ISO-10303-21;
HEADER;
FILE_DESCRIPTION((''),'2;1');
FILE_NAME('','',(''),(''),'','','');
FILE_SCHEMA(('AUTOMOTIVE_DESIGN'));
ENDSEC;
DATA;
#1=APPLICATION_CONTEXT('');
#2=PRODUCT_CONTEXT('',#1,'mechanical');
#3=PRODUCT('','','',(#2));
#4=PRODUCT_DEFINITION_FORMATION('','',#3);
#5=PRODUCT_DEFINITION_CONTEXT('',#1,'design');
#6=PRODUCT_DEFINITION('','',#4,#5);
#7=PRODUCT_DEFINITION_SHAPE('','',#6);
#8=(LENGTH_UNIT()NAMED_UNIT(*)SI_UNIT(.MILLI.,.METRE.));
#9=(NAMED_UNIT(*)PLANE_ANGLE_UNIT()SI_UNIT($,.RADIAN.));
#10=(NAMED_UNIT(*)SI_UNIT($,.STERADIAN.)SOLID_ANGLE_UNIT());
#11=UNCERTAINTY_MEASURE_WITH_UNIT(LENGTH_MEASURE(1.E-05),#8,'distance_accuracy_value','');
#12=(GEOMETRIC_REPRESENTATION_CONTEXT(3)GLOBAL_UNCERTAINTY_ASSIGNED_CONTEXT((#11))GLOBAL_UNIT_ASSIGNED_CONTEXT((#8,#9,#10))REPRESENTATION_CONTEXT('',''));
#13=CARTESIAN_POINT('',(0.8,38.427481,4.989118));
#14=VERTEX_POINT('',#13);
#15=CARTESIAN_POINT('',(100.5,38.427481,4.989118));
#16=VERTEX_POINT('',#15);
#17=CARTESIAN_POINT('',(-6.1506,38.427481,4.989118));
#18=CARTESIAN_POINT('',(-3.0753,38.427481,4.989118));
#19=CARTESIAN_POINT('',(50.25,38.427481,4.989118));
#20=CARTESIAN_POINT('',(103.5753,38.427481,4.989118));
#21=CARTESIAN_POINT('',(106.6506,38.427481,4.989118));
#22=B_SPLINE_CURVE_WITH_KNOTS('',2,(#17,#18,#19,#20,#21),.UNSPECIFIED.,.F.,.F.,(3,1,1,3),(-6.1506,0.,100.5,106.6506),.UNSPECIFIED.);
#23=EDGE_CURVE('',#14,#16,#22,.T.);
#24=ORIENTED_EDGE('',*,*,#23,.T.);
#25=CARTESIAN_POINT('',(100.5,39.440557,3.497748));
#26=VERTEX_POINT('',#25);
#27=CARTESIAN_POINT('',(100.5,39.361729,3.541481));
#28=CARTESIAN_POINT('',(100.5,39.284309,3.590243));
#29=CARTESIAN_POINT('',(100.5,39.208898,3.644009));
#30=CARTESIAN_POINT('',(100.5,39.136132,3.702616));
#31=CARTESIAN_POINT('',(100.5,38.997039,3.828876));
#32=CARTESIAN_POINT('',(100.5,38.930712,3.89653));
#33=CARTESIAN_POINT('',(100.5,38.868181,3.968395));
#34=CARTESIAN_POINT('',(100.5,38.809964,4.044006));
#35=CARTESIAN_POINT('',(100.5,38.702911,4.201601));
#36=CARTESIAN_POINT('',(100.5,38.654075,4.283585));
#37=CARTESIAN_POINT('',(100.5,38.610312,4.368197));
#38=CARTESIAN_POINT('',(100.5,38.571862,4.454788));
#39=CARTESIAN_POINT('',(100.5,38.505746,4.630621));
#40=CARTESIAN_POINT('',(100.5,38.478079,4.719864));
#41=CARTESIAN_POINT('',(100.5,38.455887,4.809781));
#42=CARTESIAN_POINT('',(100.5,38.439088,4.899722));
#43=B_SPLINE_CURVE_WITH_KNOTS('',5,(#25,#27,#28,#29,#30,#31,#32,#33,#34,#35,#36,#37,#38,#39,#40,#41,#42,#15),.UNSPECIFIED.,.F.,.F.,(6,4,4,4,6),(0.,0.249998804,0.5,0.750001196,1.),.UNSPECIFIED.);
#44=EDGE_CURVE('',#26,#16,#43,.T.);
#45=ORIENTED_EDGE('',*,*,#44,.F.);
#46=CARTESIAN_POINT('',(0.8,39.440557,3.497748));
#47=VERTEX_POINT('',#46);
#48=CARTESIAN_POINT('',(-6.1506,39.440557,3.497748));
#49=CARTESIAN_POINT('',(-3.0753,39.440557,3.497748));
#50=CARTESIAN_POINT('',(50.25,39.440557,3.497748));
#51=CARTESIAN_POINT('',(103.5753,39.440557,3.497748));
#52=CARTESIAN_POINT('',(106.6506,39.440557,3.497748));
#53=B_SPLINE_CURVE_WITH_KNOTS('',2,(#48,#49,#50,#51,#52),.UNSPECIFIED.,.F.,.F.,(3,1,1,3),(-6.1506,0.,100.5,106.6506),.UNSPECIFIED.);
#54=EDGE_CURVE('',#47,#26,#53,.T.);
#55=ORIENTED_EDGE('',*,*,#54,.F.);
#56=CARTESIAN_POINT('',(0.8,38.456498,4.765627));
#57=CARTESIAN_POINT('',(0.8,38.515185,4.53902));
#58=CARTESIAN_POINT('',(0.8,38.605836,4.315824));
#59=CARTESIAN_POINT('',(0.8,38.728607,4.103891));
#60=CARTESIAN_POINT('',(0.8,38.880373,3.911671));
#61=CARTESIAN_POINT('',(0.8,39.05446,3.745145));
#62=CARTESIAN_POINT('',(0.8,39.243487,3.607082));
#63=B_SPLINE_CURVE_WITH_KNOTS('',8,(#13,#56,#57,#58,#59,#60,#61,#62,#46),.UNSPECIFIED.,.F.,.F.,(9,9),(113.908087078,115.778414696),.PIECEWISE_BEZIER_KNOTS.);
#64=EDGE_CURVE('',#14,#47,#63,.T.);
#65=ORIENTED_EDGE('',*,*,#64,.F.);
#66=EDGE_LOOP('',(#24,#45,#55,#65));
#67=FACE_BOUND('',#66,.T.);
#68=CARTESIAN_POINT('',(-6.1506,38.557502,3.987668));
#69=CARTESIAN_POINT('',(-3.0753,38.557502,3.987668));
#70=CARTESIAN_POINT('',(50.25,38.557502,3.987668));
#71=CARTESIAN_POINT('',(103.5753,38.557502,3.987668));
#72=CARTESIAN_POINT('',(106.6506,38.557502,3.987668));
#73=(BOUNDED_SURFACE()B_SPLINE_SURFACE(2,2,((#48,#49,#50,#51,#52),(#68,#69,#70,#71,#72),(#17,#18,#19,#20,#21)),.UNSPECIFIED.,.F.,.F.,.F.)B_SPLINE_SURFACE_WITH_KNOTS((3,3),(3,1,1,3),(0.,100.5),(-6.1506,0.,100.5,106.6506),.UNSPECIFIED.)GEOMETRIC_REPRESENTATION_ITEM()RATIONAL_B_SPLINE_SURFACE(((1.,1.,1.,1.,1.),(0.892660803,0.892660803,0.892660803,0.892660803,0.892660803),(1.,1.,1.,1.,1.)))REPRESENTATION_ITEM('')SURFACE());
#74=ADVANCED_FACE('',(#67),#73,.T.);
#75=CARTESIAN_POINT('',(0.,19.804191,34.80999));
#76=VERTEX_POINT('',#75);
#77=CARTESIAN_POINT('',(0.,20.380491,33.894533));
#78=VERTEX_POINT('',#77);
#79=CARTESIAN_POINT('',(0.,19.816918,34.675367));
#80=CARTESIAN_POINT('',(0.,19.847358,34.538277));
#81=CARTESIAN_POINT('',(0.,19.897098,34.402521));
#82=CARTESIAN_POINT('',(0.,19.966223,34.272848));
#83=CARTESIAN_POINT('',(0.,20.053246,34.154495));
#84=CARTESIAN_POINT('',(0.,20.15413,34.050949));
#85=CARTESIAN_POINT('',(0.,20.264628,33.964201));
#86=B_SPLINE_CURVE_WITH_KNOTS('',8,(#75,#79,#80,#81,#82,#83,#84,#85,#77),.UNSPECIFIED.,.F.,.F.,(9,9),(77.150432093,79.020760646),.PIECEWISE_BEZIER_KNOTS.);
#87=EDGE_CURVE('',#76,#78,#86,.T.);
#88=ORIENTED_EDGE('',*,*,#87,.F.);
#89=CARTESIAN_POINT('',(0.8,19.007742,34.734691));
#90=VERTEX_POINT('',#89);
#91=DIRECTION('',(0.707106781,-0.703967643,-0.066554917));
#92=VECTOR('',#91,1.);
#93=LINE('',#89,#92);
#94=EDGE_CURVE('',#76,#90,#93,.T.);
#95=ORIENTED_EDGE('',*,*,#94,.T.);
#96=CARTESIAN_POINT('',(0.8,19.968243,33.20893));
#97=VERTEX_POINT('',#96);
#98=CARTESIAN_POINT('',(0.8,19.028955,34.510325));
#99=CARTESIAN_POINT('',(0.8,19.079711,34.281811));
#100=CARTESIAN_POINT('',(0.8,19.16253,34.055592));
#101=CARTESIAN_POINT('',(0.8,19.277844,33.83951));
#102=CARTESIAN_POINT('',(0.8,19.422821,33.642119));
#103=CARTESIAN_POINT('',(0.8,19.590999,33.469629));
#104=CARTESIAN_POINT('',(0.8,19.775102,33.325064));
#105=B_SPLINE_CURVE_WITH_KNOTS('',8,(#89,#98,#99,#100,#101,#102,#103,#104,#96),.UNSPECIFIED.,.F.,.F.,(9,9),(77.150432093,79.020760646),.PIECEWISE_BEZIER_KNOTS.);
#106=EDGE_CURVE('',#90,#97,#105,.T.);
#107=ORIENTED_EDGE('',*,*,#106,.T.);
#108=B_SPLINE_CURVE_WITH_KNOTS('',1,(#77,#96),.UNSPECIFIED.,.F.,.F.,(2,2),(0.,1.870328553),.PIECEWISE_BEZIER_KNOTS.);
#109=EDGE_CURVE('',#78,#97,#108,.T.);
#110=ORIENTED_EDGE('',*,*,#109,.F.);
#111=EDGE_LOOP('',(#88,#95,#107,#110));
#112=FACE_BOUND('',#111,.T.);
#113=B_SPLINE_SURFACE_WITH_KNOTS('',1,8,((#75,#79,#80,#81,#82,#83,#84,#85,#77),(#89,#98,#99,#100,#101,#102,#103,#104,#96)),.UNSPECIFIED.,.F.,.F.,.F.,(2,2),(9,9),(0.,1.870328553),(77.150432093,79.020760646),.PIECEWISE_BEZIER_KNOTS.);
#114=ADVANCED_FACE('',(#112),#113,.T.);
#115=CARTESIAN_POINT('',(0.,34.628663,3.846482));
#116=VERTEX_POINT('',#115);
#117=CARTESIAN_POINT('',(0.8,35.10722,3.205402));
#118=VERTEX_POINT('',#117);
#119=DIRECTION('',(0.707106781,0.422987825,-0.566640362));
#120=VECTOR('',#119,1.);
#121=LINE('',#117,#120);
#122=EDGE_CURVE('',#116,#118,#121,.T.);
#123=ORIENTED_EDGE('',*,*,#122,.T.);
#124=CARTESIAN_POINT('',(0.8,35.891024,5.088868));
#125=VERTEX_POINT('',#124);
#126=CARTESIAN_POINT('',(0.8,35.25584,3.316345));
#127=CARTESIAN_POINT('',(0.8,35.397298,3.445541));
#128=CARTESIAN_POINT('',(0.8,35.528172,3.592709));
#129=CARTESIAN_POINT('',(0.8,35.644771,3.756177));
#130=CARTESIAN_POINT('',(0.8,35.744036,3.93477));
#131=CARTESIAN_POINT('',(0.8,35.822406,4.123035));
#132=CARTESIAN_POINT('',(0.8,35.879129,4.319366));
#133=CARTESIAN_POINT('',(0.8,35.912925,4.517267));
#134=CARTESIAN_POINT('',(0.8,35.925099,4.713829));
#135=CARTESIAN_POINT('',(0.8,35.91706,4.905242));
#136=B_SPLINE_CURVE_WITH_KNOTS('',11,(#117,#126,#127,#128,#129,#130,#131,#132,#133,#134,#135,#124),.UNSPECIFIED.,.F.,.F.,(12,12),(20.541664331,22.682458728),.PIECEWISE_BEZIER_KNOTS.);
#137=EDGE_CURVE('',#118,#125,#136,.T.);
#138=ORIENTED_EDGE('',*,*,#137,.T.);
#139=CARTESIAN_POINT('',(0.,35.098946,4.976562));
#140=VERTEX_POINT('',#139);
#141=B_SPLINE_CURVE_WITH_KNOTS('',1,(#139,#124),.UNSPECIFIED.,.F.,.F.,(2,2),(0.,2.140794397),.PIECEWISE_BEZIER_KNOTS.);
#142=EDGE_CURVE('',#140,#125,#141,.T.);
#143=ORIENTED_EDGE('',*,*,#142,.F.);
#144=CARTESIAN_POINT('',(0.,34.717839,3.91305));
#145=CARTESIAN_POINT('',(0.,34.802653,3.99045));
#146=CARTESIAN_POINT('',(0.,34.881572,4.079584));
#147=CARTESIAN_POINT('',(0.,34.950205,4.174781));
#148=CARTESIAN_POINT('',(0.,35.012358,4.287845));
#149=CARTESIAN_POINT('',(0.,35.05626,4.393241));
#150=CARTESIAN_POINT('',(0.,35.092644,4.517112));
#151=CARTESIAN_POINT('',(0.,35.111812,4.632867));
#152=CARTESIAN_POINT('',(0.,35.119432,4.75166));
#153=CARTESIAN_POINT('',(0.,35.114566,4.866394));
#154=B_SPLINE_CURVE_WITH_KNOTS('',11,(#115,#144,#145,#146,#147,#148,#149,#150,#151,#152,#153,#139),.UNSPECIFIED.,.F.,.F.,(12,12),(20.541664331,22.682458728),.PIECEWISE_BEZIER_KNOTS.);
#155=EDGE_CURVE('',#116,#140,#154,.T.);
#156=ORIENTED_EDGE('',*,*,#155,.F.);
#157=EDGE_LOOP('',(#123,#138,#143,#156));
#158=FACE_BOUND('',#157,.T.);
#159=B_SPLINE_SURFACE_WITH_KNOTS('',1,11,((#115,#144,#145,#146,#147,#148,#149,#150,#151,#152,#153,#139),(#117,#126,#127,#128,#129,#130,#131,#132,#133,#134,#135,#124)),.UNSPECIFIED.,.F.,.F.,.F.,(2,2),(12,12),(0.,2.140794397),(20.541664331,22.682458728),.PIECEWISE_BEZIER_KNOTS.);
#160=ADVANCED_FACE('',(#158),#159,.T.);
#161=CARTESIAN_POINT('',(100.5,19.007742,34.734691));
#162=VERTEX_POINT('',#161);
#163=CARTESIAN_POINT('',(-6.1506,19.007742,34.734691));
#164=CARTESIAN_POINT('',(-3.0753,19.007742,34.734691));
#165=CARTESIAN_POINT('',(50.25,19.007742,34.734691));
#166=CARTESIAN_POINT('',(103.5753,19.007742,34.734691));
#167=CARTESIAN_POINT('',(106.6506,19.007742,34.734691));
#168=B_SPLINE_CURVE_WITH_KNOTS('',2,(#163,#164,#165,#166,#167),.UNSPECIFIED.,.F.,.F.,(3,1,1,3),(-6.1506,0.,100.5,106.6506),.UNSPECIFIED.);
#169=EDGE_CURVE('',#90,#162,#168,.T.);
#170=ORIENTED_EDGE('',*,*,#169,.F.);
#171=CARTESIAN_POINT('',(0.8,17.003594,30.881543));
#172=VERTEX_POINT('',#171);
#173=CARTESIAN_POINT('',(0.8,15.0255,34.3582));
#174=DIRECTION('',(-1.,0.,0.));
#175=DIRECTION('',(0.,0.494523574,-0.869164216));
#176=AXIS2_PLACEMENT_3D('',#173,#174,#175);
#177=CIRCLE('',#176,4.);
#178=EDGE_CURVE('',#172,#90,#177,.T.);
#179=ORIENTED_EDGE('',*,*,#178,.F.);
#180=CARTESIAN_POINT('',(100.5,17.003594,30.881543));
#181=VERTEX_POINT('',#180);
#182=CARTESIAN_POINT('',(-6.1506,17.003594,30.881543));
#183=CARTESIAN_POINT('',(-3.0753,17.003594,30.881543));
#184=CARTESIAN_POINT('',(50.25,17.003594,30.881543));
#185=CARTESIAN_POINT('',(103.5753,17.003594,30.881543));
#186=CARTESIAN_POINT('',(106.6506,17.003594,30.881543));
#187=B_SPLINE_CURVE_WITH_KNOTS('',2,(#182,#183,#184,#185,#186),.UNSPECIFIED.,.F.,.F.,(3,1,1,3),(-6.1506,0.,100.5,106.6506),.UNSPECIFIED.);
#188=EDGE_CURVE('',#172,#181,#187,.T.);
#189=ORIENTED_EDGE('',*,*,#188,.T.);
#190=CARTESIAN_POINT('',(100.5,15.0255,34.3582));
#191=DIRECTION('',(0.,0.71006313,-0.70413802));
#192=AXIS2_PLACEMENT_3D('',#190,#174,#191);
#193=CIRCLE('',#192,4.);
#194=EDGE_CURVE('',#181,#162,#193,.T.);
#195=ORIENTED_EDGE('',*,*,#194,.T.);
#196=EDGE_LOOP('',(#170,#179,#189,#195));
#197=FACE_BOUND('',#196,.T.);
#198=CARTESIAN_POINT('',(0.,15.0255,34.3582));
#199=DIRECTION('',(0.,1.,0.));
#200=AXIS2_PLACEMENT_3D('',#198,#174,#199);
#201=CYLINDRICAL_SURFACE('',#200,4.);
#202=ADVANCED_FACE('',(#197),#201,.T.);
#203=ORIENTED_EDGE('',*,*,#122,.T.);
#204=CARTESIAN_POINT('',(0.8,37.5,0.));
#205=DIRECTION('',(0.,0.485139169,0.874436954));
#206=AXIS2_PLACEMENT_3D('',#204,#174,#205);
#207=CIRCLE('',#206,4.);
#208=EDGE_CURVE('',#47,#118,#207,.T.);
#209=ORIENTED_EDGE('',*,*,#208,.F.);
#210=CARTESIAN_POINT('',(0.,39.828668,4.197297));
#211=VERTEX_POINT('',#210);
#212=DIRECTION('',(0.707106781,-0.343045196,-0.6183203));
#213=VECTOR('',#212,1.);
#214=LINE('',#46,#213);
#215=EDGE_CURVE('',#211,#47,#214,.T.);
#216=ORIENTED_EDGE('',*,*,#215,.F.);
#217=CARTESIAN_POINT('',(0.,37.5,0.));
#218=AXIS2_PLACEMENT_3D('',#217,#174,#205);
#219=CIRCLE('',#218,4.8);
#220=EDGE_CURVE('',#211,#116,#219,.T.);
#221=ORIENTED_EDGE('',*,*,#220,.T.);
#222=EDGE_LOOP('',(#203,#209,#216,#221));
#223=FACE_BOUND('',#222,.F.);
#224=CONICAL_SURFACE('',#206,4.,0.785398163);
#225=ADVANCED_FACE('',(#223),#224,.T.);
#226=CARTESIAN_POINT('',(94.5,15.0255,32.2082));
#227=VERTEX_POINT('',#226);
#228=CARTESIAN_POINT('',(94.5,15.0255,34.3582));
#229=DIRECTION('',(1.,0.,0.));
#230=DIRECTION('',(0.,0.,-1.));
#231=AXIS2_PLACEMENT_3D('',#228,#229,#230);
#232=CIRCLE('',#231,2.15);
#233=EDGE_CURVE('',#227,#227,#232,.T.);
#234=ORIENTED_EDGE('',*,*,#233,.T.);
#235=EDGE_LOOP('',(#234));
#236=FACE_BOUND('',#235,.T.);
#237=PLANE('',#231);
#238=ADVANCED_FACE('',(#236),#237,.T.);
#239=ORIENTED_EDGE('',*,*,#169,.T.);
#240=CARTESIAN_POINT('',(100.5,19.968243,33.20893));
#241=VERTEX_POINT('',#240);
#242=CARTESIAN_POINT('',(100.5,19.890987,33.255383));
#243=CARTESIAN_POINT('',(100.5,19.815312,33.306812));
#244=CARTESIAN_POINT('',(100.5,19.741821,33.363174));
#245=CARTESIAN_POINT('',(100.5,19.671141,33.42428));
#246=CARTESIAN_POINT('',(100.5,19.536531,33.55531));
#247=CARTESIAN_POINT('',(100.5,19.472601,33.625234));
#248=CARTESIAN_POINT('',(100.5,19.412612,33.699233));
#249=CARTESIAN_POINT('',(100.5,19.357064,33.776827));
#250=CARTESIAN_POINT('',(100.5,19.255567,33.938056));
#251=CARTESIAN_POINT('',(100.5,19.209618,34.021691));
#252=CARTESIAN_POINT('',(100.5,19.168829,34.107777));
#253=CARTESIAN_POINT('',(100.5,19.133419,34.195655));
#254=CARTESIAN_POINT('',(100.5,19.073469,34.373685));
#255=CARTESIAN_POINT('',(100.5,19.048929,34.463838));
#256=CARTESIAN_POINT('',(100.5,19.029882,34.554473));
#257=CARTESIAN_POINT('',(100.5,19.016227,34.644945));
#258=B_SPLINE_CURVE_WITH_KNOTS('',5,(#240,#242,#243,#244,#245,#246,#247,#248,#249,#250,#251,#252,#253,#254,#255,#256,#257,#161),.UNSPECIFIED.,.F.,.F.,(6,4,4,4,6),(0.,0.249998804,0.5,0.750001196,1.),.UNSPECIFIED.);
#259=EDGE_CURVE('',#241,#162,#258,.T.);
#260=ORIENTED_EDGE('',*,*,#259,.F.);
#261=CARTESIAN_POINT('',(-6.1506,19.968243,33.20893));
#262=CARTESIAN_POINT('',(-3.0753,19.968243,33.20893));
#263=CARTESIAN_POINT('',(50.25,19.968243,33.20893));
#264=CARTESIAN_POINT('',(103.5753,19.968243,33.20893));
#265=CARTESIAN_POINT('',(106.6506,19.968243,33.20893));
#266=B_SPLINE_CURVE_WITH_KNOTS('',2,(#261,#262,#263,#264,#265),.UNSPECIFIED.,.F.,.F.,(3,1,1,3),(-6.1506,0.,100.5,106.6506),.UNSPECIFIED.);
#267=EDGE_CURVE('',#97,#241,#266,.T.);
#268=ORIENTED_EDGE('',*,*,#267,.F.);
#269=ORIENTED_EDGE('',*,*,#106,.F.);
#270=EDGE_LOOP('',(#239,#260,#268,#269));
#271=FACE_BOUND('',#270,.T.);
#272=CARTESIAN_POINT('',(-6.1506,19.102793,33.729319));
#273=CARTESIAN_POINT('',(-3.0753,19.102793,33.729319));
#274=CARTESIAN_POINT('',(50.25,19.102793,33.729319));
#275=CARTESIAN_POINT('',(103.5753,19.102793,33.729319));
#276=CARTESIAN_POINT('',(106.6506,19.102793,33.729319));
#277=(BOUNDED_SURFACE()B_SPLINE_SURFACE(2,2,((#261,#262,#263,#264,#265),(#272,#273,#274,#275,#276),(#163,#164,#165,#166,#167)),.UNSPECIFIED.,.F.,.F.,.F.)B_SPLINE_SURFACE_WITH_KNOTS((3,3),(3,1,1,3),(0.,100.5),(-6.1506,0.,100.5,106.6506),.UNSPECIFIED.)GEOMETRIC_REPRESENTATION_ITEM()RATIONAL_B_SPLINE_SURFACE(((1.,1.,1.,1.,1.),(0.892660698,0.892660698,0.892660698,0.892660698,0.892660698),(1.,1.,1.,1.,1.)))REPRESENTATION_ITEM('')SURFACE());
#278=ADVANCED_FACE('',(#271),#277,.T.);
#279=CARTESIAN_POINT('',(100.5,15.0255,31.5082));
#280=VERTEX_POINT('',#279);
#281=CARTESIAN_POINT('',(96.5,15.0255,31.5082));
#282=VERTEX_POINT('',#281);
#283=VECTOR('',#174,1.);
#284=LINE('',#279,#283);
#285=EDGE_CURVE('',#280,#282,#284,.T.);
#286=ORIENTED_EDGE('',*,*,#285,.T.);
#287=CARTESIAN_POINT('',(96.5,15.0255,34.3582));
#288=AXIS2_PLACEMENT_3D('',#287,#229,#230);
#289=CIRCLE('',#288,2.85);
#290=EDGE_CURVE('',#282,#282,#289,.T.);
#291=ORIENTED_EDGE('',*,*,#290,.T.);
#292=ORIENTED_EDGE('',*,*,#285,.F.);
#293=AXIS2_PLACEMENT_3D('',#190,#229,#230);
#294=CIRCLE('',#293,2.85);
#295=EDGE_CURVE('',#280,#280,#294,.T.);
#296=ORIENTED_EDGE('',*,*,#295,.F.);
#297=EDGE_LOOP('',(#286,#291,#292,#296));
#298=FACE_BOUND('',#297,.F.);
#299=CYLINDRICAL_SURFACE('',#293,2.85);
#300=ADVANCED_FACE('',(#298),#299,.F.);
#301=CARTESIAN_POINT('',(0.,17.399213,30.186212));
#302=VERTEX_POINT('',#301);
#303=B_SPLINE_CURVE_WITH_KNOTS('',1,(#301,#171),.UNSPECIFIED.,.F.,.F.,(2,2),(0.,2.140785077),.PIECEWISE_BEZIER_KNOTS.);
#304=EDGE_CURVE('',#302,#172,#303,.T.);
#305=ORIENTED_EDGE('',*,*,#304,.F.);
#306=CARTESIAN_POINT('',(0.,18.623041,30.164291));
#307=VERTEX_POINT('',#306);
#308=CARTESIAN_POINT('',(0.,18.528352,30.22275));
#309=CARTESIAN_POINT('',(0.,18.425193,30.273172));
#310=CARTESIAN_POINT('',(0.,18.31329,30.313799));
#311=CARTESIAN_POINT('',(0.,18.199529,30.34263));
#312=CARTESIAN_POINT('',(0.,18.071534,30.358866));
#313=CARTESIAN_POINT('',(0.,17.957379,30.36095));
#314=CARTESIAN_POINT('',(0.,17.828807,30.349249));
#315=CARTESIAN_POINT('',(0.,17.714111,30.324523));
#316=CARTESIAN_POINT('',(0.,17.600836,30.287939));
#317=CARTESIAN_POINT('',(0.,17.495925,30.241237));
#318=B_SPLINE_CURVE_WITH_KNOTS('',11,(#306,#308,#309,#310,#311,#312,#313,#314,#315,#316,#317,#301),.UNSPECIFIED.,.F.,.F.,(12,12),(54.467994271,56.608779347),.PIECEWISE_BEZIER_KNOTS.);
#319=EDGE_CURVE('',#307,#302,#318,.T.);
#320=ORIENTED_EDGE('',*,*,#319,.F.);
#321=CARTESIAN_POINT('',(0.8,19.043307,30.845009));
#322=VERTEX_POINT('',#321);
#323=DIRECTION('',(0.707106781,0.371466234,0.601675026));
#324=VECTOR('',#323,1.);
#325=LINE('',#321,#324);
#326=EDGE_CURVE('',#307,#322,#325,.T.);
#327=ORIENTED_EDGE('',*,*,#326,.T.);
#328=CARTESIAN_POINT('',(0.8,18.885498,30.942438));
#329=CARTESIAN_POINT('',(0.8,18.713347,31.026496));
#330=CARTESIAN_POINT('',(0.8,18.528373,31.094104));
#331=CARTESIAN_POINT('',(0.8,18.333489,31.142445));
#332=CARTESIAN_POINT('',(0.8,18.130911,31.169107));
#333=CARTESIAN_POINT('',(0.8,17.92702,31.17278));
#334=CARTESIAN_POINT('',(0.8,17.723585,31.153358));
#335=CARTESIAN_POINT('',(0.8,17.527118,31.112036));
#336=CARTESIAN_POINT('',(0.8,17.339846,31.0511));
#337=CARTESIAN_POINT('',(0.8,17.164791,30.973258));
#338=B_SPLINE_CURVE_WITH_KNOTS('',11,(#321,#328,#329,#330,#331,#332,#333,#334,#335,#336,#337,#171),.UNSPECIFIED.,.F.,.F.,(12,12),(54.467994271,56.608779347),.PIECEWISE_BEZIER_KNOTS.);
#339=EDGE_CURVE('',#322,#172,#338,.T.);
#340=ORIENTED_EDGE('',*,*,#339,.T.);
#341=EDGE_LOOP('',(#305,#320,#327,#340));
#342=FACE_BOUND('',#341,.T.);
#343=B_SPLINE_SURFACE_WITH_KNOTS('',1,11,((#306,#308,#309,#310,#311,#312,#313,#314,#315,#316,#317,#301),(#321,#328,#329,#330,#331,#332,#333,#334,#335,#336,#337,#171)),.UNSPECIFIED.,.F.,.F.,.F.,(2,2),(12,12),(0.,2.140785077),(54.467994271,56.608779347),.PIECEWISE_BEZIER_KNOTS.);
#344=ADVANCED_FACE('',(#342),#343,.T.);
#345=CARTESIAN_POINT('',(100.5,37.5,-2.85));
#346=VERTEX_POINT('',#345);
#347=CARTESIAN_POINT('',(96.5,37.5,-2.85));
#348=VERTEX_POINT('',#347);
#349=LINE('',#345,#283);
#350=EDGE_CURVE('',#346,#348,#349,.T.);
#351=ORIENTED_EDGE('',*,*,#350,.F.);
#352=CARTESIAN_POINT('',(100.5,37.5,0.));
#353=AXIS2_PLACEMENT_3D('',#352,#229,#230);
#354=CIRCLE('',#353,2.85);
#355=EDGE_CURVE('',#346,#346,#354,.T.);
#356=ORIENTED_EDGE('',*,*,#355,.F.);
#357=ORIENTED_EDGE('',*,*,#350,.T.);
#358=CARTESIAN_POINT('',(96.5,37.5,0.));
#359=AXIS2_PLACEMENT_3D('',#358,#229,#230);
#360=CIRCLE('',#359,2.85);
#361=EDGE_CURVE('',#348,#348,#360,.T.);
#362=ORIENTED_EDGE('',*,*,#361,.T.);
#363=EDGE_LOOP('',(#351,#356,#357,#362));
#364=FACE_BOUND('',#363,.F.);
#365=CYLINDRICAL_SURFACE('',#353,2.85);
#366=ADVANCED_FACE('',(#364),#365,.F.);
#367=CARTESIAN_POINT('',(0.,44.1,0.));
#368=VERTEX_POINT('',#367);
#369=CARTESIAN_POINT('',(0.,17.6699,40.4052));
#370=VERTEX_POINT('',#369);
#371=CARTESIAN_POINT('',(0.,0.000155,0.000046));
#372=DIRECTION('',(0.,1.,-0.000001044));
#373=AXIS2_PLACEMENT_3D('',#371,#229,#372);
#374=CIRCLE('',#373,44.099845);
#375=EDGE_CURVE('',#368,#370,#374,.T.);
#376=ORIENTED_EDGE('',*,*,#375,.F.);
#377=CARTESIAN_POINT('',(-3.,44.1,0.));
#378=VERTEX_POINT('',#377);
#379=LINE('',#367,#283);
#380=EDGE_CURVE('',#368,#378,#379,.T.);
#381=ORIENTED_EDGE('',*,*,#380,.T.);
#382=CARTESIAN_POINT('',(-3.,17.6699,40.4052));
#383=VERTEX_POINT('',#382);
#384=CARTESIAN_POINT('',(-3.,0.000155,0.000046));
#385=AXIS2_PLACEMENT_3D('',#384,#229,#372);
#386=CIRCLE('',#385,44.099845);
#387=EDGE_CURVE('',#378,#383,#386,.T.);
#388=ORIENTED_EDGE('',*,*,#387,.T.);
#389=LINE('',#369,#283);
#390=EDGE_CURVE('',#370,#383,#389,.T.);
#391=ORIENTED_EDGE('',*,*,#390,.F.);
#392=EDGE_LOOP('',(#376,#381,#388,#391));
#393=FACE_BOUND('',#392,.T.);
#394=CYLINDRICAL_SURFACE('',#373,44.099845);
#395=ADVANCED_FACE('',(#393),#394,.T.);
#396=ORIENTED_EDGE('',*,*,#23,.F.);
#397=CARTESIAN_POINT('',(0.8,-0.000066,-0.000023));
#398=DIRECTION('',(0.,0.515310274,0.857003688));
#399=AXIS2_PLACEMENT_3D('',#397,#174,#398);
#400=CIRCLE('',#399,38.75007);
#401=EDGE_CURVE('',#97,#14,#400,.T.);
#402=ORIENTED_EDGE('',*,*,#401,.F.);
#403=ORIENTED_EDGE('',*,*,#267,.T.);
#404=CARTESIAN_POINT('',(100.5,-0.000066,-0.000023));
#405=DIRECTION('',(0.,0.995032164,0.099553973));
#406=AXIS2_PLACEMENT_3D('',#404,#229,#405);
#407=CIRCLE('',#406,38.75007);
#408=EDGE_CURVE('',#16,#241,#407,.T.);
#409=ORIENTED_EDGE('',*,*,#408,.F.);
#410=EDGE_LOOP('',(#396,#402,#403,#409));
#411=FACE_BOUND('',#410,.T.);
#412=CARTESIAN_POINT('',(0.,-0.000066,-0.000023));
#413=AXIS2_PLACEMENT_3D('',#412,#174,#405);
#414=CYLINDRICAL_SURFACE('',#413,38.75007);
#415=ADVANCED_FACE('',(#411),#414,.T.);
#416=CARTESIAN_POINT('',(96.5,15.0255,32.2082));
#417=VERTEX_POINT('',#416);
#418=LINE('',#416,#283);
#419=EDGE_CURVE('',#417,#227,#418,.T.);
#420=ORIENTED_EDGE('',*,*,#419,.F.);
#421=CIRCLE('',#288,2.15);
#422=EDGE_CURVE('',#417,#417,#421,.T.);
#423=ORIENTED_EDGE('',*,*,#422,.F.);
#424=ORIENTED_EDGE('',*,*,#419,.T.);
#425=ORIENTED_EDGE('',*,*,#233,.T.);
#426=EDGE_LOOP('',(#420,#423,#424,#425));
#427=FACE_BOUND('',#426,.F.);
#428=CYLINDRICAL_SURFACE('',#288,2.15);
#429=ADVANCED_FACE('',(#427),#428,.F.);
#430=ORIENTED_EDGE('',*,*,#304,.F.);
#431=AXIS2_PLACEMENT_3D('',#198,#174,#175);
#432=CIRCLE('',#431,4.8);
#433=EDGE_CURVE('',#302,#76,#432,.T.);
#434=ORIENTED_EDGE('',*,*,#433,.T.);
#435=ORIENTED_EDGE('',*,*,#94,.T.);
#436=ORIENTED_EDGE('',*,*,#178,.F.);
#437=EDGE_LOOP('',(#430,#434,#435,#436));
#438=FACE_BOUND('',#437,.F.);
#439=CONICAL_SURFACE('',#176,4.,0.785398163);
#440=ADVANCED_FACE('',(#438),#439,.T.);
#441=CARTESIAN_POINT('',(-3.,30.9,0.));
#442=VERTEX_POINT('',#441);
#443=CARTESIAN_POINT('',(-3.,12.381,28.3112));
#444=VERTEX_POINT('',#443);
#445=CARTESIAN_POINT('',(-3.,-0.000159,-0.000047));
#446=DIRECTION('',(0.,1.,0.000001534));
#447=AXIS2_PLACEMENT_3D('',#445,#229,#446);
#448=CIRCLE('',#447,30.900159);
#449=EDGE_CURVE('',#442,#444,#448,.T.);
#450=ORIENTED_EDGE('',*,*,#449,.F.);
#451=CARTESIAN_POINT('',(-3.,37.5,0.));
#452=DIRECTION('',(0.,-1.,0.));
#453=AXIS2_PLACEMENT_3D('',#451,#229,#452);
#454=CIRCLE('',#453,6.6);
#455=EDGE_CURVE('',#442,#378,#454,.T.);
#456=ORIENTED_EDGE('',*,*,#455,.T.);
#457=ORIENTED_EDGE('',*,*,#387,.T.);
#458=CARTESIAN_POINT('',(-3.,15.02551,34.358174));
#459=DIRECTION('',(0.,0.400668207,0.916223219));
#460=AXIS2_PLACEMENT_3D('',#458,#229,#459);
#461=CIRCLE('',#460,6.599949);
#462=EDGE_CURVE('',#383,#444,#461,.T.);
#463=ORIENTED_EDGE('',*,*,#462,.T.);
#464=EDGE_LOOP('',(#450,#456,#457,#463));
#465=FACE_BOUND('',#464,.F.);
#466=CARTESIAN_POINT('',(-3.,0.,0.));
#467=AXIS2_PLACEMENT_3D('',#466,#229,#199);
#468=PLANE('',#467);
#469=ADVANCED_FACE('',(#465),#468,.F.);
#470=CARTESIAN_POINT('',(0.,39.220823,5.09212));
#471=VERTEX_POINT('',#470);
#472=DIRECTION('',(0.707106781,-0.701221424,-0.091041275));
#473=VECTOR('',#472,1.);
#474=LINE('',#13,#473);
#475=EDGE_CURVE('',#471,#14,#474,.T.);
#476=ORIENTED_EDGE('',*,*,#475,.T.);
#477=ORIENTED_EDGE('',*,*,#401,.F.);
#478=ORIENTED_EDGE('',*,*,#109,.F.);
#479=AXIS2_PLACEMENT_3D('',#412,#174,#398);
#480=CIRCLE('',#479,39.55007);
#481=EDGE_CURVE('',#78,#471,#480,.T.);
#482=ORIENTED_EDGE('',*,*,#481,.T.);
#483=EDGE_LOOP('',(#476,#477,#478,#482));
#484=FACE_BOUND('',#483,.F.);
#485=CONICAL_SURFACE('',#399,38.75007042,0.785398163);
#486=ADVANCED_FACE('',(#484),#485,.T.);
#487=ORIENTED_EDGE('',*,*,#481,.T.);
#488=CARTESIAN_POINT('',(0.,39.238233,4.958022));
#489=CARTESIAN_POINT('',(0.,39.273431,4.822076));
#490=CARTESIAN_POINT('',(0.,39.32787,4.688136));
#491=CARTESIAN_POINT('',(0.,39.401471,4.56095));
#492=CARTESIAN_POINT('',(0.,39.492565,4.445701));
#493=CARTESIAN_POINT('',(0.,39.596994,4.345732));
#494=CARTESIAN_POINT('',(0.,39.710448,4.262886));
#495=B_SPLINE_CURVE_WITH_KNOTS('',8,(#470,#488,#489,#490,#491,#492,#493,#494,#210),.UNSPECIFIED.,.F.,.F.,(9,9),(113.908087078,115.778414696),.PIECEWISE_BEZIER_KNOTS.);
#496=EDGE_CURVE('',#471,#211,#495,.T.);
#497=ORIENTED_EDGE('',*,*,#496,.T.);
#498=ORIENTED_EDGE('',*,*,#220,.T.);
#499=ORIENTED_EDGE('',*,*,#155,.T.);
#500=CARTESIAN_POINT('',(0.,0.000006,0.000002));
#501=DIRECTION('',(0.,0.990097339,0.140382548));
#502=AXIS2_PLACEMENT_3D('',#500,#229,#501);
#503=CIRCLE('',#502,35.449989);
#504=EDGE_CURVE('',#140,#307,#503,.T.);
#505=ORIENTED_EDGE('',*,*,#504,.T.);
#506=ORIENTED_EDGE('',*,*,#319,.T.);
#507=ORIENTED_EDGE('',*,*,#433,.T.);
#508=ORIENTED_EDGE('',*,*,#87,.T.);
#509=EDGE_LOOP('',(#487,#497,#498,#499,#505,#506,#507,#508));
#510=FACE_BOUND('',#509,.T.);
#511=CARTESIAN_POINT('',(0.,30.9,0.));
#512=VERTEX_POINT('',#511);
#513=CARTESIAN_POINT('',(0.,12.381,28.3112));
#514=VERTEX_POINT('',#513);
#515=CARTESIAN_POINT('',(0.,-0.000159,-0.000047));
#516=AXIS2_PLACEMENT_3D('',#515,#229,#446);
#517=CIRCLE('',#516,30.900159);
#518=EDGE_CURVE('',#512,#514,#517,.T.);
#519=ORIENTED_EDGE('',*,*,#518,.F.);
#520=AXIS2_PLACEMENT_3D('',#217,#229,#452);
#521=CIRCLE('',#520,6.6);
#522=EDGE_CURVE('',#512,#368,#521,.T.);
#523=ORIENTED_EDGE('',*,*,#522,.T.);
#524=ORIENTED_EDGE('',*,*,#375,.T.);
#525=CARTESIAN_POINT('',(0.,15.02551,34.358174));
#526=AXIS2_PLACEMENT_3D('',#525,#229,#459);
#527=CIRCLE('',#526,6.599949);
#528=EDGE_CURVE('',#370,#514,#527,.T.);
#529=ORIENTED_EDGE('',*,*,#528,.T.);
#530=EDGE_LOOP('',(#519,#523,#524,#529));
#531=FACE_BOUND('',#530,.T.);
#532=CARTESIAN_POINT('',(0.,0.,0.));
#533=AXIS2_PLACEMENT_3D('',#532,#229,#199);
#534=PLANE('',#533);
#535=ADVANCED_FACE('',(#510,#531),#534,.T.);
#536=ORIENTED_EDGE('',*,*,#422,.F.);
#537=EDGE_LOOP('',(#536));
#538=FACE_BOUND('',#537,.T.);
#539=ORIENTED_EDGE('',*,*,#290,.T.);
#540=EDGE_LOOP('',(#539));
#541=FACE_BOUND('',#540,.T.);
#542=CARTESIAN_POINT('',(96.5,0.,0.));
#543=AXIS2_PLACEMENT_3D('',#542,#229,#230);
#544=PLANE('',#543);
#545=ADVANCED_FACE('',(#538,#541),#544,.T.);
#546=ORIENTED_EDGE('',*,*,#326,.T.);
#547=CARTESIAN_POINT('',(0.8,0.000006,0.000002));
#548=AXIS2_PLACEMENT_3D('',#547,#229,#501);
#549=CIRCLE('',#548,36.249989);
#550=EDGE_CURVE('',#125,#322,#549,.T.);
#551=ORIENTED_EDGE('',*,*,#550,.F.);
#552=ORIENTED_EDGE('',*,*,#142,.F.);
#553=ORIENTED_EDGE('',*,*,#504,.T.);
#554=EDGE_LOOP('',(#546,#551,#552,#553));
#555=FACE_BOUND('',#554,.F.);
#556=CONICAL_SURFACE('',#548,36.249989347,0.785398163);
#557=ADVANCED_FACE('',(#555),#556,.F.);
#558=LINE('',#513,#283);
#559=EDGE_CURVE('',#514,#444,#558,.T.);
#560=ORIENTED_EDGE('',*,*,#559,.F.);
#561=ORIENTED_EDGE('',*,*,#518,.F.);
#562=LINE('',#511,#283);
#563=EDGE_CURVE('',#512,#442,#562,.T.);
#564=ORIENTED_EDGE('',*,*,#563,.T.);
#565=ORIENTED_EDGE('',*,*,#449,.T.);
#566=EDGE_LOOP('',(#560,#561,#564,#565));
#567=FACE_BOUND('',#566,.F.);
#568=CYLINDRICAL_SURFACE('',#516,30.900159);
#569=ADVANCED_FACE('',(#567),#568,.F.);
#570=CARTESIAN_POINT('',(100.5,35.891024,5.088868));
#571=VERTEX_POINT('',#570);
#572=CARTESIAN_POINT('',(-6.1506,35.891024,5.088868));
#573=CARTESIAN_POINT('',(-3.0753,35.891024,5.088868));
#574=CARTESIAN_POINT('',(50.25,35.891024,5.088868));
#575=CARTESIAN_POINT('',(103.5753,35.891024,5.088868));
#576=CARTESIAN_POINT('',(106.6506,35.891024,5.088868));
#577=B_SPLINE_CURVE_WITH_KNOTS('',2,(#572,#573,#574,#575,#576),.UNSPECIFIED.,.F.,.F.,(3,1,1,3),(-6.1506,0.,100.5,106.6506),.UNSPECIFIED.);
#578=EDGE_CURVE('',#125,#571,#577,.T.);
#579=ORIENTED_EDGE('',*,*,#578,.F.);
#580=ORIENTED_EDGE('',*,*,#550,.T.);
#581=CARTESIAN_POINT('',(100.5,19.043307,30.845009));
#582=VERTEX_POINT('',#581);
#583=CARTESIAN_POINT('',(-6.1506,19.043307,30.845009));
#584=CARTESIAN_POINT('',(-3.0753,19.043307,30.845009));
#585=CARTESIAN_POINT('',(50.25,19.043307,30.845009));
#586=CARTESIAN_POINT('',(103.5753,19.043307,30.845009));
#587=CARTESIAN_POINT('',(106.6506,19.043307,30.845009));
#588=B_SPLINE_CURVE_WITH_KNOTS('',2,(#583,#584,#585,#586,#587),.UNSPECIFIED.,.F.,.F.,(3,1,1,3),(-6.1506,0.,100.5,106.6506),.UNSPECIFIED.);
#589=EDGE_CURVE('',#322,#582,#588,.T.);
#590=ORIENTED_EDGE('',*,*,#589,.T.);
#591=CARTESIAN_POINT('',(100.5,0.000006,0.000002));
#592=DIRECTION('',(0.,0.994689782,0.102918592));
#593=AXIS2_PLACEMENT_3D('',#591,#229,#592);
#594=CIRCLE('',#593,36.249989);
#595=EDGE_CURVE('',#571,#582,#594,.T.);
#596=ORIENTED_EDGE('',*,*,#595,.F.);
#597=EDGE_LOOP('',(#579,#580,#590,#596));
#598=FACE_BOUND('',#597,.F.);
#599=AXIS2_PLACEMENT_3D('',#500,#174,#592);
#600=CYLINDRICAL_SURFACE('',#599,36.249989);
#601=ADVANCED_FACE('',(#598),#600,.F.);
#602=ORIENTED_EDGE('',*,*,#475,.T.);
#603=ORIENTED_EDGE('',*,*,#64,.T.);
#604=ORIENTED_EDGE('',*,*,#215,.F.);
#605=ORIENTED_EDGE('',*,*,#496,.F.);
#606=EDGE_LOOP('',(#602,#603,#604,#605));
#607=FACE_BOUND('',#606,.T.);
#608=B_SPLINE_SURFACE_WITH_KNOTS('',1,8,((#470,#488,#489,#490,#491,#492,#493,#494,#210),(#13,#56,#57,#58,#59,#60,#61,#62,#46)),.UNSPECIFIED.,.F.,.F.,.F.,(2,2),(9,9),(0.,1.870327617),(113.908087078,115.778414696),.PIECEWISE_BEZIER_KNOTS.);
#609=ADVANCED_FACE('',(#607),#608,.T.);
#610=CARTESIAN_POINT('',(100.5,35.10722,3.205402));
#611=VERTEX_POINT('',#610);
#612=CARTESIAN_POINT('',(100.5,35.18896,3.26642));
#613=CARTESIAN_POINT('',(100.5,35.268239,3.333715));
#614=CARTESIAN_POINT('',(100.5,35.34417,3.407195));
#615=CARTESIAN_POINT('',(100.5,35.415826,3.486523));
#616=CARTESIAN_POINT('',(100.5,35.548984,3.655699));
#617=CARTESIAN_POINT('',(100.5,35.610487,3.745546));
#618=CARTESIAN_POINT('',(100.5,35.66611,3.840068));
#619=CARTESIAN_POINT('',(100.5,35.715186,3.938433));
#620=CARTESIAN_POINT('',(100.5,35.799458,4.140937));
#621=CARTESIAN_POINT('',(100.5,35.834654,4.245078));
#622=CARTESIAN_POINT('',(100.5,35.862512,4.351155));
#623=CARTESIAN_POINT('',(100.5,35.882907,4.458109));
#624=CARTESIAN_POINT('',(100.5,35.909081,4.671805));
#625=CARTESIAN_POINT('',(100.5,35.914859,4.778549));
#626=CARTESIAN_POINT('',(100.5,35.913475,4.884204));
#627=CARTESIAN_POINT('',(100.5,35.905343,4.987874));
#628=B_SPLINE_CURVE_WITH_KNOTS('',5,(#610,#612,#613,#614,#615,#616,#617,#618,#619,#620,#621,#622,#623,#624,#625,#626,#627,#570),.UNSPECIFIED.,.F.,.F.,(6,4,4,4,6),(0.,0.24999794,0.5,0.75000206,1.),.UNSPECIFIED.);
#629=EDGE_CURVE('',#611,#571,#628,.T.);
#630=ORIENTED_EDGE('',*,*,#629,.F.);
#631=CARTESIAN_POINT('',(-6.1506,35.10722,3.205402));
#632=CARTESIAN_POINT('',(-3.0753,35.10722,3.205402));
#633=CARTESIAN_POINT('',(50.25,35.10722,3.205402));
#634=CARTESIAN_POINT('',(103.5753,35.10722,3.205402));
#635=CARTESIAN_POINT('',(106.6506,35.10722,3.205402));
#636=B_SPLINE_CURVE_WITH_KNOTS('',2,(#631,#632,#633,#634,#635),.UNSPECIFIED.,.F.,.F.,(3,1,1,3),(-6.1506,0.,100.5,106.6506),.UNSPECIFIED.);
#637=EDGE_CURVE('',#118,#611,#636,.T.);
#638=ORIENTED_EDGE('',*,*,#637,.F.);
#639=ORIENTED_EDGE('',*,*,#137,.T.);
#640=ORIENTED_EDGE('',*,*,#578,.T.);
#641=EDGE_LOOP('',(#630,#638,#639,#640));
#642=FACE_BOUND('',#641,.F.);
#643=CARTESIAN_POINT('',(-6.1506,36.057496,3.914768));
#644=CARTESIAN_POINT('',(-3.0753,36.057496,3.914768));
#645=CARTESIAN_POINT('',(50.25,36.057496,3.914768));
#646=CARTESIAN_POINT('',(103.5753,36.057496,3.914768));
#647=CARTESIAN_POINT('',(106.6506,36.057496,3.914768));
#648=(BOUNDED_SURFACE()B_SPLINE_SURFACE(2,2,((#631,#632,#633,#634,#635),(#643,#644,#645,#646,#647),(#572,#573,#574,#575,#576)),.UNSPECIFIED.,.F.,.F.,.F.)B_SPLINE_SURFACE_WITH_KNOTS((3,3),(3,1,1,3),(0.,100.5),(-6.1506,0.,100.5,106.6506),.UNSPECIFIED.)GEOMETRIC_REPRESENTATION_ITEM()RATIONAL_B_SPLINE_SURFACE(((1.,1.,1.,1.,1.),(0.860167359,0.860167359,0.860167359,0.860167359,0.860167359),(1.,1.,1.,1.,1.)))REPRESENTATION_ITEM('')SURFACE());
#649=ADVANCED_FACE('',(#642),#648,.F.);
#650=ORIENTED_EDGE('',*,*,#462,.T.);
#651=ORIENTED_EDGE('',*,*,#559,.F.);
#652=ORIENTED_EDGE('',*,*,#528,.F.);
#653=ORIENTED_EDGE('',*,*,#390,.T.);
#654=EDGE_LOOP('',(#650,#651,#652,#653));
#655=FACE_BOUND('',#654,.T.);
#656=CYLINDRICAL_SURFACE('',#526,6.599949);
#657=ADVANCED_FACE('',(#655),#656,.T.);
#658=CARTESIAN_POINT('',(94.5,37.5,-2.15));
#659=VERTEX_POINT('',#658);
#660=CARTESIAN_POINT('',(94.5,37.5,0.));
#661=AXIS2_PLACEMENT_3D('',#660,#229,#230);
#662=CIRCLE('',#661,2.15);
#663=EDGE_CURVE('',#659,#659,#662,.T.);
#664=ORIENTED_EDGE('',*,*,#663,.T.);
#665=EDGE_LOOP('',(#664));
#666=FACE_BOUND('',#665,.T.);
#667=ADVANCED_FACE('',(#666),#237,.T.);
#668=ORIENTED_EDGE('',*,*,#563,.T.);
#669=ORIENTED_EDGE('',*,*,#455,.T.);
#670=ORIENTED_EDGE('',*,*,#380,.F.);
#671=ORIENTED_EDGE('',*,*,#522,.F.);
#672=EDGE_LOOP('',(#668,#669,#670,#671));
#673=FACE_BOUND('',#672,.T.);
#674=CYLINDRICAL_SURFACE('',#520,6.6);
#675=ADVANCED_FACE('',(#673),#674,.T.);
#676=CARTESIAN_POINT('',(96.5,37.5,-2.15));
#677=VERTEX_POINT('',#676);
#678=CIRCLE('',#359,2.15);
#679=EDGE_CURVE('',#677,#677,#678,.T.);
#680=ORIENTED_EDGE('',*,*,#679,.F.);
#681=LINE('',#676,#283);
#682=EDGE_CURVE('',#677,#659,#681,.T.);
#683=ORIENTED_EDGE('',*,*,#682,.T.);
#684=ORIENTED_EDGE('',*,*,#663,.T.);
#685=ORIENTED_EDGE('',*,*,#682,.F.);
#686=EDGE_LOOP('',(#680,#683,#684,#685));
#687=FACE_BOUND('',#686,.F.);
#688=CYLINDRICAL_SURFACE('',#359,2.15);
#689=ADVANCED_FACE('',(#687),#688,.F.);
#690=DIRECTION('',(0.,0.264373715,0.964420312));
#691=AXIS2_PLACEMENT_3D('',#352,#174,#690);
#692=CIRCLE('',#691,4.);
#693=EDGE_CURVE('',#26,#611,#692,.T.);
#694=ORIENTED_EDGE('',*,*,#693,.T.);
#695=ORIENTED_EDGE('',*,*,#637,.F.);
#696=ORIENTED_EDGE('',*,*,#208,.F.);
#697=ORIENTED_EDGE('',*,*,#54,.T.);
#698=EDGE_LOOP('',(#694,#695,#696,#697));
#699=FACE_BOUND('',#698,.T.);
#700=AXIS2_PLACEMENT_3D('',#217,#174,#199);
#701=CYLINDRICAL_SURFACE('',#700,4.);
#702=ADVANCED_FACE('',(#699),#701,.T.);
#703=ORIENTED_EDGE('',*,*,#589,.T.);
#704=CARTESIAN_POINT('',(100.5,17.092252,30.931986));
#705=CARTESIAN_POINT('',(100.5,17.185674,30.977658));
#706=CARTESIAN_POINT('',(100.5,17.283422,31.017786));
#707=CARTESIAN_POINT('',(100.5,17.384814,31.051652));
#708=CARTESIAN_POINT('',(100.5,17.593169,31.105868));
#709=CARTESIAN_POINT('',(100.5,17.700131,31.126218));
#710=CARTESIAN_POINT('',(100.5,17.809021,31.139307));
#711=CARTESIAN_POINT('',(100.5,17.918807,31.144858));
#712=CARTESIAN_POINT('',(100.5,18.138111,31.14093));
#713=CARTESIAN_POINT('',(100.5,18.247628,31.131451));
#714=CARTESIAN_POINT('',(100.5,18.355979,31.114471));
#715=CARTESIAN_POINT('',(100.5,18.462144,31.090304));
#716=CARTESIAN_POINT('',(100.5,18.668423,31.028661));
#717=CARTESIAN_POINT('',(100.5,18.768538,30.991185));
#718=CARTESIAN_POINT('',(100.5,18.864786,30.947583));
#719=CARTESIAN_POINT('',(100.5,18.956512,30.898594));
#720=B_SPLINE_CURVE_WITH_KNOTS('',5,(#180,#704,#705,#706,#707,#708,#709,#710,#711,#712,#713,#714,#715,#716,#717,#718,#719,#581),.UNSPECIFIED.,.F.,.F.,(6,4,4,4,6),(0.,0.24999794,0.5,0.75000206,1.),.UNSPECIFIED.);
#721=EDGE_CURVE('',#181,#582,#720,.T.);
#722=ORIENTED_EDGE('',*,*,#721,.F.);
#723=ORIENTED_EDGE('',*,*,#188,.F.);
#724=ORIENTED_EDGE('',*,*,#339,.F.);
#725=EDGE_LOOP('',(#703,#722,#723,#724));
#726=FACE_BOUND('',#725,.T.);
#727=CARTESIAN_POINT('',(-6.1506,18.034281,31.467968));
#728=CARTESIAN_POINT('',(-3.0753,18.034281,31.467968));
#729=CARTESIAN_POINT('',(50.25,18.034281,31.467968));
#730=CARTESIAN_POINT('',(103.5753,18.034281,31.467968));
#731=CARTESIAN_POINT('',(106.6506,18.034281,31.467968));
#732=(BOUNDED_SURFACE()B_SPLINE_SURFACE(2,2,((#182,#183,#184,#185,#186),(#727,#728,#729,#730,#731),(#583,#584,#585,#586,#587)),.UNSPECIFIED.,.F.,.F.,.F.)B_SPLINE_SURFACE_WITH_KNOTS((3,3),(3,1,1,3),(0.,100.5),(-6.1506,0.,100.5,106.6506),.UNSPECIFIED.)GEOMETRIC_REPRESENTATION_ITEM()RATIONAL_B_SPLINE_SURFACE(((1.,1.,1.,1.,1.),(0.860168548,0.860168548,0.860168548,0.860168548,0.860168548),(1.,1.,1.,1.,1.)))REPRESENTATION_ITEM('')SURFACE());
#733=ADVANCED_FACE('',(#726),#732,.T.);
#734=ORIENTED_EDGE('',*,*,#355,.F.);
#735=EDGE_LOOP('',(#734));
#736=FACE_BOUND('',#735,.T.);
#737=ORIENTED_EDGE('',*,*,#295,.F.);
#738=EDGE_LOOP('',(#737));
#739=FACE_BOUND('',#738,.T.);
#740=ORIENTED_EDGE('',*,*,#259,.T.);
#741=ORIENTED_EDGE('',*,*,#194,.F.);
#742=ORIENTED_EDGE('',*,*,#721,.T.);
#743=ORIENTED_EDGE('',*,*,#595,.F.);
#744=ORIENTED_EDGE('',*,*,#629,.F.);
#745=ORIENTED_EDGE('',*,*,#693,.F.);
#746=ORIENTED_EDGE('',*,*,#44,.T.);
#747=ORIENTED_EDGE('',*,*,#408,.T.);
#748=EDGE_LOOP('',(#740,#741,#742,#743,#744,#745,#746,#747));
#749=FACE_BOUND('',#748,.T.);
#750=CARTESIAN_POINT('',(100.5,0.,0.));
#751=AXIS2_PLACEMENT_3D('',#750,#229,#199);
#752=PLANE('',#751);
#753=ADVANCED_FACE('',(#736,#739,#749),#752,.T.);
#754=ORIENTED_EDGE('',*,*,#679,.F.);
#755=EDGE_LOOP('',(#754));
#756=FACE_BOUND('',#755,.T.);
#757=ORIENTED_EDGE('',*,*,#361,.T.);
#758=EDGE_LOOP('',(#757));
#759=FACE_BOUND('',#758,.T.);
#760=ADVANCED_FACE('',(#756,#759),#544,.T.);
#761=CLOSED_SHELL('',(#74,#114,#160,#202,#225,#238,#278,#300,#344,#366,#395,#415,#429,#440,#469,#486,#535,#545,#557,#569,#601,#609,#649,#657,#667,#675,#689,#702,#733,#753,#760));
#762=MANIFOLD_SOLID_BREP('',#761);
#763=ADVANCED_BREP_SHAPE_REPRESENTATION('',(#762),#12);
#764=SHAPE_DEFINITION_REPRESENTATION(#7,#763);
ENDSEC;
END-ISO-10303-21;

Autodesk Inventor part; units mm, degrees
ref_plane "YZ Plane" through (0, 0, 0) normal (1, 0, 0) x (0, 1, 0)
ref_plane "XZ Plane" through (0, 0, 0) normal (0, 1, 0) x (-1, 0, 0)
ref_plane "XY Plane" through (0, 0, 0) normal (0, 0, 1) x (1, 0, 0)
sketch "Sketch1" plane through (0, 0, 0) normal (1, 0, 0) x (0, 1, 0)
  arc A0 (37.5, 0) -> (15.0255, 34.3582) centre (0, 0) ccw
  circle A1 centre (15.0255, 34.3582) radius 4
  circle A2 centre (37.5, 0) radius 4
  arc A3 (33.5, 0) -> (13.4227, 30.6933) centre (0, 0) ccw
  arc A4 (41.5, 0) -> (16.6282, 38.0231) centre (0, 0) ccw
  arc A5 (30.9, 0) -> (44.1, 0) centre (37.5, 0) ccw
  arc A6 (17.6699, 40.4052) -> (12.381, 28.3112) centre (15.0255, 34.3582) ccw
  arc A7 (30.9, 0) -> (12.381, 28.3112) centre (0, 0) ccw
  arc A8 (44.1, 0) -> (17.6699, 40.4052) centre (0, 0) ccw
  circle A9 centre (37.5, 0) radius 1.25
  circle A10 centre (15.051, 34.347) radius 1.25
  arc A11 (36.0575, 3.7308) -> (17.8657, 31.5417) centre (0, 0) ccw
  arc A12 (38.5575, 3.8577) -> (18.9837, 33.7814) centre (0, 0) ccw
  dimension "d2" = 8
  dimension "d3" = 8
  dimension "d4" = 83
  dimension "d7" = 13.2
  dimension "d8" = 13.2
  dimension "d9" = 88.2
  dimension "d15" = 2.5
  dimension "d16" = 2.5
  dimension "d17" = 77.5
extrude "Extrusion1" add sketch "Sketch1" along normal blind 100.5 contours A2 A11 A1 A0 | A0 A1 A12 A2 | A2 | A1 | A9 | A10
extrude "Extrusion2" add sketch "Sketch1" against normal blind 3 contours A2 A11 A1 A0 | A0 A1 A12 A2 | A2 | A1 | A12 A1 A4 A2 | A2 A3 A1 A11 | A7 A6 A8 A5 | A9 | A10
fillet "Fillet1" radius 2 4 edges at (50.25, 36.0575, 3.7308) (50.25, 17.8657, 31.5417) (50.25, 18.9837, 33.7814) (50.25, 38.5575, 3.8577)
chamfer "Chamfer2" distance 0.8 angle 45 8 edges at (0, 37.7692, -3.9909) (0, 38.7564, 4.1228) (0, 32.4284, 21.2122) (0, 19.3063, 33.8574) (0, 11.4768, 36.204) (0, 18.0284, 31.1429) (0, 30.3363, 19.8437) (0, 35.7573, 4.0397)
sketch "Sketch2" plane through (100.5, 0, 0) normal (1, 0, 0) x (0, 0, -1)
  arc A0 (-34.7347, 19.0077) -> (-30.8815, 17.0036) centre (-34.3582, 15.0255) ccw projected
  arc A1 (-3.2054, 35.1072) -> (-3.4977, 39.4406) centre (0, 37.5) ccw projected
  circle A2 centre (-34.3582, 15.0255) radius 3.75
  circle A3 centre (0, 37.5) radius 3.75
  point P0 (0, 0)
  dimension "d22" = 7.5
  dimension "d23" = 7.5
extrude "Extrusion3" [suppressed]
sketch "Sketch3" plane through (102.8, 15.0255, 34.3582) normal (1, 0, 0) x (0, 0, -1)
  circle A0 centre (0, 0) radius 3.75 projected
  circle A1 centre (0, 0) radius 4
  circle A2 centre (34.3582, 22.4745) radius 3.75 projected
  circle A3 centre (34.3582, 22.4745) radius 4
  point P0 (34.3582, -15.0255)
  dimension "d26" = 8
  dimension "d27" = 8
extrude "Extrusion4" [suppressed]
chamfer "Chamfer3" [suppressed]
sketch "Sketch4" plane through (104.8, 15.0255, 34.3582) normal (1, 0, 0) x (0, 0, -1)
  circle A0 centre (34.3582, 22.4745) radius 2.5 projected
  circle A1 centre (0, 0) radius 2.5 projected
  arc A2 (34.3582, 22.4745) -> (0, 0) centre (34.3582, -15.0255) ccw
  line L0 (8.4634, -2.6098) -> (-7.662, 4.4422)
  line L1 (-7.662, 4.4422) -> (-8.4634, 2.6098)
  line L2 (-8.4634, 2.6098) -> (7.662, -4.4422)
  line L3 (7.662, -4.4422) -> (8.4634, -2.6098)
  line L4 (8.4634, -2.6098) -> (-8.4634, 2.6098) construction
  line L5 (-7.662, 4.4422) -> (7.662, -4.4422) construction
  line L6 (33.3582, 13.6745) -> (33.3582, 31.2745)
  line L7 (33.3582, 31.2745) -> (35.3582, 31.2745)
  line L8 (35.3582, 31.2745) -> (35.3582, 13.6745)
  line L9 (35.3582, 13.6745) -> (33.3582, 13.6745)
  line L10 (33.3582, 13.6745) -> (35.3582, 31.2745) construction
  line L11 (33.3582, 31.2745) -> (35.3582, 13.6745) construction
  point P0 (34.3582, -15.0255)
  point P1 (0, 0)
  dimension "d33" = 37.5
  dimension "d34" = 2
  dimension "d35" = 2
extrude "Extrusion5" [suppressed]
sketch "Sketch5" plane through (100.5, 0, 0) normal (1, 0, 0) x (0, 0, -1)
  arc A0 (-34.7347, 19.0077) -> (-30.8815, 17.0036) centre (-34.3582, 15.0255) ccw projected
  arc A1 (-3.2054, 35.1072) -> (-3.4977, 39.4406) centre (0, 37.5) ccw projected
  circle A2 centre (-34.3582, 15.0255) radius 2.85
  circle A3 centre (0, 37.5) radius 2.85
  point P0 (0, 0)
  dimension "d38" = 5.7
  dimension "d39" = 5.7
extrude "Extrusion6" cut sketch "Sketch5" against normal blind 4
sketch "Sketch6" plane through (96.5, 15.0255, 34.3582) normal (1, 0, 0) x (0, 0, -1)
  circle A0 centre (0, 0) radius 2.85 projected
  circle A1 centre (34.3582, 22.4745) radius 2.85 projected
  circle A2 centre (0, 0) radius 2.15
  circle A3 centre (34.3582, 22.4745) radius 2.15
  point P0 (34.3582, -15.0255)
  dimension "d42" = 4.3
  dimension "d43" = 4.3
extrude "Extrusion7" cut sketch "Sketch6" against normal blind 2 contours A2 | A3
equation "\"d23\" = d22"
equation "\"d35\" = d34"
properties part number "Mechanische_Anschlaege"
